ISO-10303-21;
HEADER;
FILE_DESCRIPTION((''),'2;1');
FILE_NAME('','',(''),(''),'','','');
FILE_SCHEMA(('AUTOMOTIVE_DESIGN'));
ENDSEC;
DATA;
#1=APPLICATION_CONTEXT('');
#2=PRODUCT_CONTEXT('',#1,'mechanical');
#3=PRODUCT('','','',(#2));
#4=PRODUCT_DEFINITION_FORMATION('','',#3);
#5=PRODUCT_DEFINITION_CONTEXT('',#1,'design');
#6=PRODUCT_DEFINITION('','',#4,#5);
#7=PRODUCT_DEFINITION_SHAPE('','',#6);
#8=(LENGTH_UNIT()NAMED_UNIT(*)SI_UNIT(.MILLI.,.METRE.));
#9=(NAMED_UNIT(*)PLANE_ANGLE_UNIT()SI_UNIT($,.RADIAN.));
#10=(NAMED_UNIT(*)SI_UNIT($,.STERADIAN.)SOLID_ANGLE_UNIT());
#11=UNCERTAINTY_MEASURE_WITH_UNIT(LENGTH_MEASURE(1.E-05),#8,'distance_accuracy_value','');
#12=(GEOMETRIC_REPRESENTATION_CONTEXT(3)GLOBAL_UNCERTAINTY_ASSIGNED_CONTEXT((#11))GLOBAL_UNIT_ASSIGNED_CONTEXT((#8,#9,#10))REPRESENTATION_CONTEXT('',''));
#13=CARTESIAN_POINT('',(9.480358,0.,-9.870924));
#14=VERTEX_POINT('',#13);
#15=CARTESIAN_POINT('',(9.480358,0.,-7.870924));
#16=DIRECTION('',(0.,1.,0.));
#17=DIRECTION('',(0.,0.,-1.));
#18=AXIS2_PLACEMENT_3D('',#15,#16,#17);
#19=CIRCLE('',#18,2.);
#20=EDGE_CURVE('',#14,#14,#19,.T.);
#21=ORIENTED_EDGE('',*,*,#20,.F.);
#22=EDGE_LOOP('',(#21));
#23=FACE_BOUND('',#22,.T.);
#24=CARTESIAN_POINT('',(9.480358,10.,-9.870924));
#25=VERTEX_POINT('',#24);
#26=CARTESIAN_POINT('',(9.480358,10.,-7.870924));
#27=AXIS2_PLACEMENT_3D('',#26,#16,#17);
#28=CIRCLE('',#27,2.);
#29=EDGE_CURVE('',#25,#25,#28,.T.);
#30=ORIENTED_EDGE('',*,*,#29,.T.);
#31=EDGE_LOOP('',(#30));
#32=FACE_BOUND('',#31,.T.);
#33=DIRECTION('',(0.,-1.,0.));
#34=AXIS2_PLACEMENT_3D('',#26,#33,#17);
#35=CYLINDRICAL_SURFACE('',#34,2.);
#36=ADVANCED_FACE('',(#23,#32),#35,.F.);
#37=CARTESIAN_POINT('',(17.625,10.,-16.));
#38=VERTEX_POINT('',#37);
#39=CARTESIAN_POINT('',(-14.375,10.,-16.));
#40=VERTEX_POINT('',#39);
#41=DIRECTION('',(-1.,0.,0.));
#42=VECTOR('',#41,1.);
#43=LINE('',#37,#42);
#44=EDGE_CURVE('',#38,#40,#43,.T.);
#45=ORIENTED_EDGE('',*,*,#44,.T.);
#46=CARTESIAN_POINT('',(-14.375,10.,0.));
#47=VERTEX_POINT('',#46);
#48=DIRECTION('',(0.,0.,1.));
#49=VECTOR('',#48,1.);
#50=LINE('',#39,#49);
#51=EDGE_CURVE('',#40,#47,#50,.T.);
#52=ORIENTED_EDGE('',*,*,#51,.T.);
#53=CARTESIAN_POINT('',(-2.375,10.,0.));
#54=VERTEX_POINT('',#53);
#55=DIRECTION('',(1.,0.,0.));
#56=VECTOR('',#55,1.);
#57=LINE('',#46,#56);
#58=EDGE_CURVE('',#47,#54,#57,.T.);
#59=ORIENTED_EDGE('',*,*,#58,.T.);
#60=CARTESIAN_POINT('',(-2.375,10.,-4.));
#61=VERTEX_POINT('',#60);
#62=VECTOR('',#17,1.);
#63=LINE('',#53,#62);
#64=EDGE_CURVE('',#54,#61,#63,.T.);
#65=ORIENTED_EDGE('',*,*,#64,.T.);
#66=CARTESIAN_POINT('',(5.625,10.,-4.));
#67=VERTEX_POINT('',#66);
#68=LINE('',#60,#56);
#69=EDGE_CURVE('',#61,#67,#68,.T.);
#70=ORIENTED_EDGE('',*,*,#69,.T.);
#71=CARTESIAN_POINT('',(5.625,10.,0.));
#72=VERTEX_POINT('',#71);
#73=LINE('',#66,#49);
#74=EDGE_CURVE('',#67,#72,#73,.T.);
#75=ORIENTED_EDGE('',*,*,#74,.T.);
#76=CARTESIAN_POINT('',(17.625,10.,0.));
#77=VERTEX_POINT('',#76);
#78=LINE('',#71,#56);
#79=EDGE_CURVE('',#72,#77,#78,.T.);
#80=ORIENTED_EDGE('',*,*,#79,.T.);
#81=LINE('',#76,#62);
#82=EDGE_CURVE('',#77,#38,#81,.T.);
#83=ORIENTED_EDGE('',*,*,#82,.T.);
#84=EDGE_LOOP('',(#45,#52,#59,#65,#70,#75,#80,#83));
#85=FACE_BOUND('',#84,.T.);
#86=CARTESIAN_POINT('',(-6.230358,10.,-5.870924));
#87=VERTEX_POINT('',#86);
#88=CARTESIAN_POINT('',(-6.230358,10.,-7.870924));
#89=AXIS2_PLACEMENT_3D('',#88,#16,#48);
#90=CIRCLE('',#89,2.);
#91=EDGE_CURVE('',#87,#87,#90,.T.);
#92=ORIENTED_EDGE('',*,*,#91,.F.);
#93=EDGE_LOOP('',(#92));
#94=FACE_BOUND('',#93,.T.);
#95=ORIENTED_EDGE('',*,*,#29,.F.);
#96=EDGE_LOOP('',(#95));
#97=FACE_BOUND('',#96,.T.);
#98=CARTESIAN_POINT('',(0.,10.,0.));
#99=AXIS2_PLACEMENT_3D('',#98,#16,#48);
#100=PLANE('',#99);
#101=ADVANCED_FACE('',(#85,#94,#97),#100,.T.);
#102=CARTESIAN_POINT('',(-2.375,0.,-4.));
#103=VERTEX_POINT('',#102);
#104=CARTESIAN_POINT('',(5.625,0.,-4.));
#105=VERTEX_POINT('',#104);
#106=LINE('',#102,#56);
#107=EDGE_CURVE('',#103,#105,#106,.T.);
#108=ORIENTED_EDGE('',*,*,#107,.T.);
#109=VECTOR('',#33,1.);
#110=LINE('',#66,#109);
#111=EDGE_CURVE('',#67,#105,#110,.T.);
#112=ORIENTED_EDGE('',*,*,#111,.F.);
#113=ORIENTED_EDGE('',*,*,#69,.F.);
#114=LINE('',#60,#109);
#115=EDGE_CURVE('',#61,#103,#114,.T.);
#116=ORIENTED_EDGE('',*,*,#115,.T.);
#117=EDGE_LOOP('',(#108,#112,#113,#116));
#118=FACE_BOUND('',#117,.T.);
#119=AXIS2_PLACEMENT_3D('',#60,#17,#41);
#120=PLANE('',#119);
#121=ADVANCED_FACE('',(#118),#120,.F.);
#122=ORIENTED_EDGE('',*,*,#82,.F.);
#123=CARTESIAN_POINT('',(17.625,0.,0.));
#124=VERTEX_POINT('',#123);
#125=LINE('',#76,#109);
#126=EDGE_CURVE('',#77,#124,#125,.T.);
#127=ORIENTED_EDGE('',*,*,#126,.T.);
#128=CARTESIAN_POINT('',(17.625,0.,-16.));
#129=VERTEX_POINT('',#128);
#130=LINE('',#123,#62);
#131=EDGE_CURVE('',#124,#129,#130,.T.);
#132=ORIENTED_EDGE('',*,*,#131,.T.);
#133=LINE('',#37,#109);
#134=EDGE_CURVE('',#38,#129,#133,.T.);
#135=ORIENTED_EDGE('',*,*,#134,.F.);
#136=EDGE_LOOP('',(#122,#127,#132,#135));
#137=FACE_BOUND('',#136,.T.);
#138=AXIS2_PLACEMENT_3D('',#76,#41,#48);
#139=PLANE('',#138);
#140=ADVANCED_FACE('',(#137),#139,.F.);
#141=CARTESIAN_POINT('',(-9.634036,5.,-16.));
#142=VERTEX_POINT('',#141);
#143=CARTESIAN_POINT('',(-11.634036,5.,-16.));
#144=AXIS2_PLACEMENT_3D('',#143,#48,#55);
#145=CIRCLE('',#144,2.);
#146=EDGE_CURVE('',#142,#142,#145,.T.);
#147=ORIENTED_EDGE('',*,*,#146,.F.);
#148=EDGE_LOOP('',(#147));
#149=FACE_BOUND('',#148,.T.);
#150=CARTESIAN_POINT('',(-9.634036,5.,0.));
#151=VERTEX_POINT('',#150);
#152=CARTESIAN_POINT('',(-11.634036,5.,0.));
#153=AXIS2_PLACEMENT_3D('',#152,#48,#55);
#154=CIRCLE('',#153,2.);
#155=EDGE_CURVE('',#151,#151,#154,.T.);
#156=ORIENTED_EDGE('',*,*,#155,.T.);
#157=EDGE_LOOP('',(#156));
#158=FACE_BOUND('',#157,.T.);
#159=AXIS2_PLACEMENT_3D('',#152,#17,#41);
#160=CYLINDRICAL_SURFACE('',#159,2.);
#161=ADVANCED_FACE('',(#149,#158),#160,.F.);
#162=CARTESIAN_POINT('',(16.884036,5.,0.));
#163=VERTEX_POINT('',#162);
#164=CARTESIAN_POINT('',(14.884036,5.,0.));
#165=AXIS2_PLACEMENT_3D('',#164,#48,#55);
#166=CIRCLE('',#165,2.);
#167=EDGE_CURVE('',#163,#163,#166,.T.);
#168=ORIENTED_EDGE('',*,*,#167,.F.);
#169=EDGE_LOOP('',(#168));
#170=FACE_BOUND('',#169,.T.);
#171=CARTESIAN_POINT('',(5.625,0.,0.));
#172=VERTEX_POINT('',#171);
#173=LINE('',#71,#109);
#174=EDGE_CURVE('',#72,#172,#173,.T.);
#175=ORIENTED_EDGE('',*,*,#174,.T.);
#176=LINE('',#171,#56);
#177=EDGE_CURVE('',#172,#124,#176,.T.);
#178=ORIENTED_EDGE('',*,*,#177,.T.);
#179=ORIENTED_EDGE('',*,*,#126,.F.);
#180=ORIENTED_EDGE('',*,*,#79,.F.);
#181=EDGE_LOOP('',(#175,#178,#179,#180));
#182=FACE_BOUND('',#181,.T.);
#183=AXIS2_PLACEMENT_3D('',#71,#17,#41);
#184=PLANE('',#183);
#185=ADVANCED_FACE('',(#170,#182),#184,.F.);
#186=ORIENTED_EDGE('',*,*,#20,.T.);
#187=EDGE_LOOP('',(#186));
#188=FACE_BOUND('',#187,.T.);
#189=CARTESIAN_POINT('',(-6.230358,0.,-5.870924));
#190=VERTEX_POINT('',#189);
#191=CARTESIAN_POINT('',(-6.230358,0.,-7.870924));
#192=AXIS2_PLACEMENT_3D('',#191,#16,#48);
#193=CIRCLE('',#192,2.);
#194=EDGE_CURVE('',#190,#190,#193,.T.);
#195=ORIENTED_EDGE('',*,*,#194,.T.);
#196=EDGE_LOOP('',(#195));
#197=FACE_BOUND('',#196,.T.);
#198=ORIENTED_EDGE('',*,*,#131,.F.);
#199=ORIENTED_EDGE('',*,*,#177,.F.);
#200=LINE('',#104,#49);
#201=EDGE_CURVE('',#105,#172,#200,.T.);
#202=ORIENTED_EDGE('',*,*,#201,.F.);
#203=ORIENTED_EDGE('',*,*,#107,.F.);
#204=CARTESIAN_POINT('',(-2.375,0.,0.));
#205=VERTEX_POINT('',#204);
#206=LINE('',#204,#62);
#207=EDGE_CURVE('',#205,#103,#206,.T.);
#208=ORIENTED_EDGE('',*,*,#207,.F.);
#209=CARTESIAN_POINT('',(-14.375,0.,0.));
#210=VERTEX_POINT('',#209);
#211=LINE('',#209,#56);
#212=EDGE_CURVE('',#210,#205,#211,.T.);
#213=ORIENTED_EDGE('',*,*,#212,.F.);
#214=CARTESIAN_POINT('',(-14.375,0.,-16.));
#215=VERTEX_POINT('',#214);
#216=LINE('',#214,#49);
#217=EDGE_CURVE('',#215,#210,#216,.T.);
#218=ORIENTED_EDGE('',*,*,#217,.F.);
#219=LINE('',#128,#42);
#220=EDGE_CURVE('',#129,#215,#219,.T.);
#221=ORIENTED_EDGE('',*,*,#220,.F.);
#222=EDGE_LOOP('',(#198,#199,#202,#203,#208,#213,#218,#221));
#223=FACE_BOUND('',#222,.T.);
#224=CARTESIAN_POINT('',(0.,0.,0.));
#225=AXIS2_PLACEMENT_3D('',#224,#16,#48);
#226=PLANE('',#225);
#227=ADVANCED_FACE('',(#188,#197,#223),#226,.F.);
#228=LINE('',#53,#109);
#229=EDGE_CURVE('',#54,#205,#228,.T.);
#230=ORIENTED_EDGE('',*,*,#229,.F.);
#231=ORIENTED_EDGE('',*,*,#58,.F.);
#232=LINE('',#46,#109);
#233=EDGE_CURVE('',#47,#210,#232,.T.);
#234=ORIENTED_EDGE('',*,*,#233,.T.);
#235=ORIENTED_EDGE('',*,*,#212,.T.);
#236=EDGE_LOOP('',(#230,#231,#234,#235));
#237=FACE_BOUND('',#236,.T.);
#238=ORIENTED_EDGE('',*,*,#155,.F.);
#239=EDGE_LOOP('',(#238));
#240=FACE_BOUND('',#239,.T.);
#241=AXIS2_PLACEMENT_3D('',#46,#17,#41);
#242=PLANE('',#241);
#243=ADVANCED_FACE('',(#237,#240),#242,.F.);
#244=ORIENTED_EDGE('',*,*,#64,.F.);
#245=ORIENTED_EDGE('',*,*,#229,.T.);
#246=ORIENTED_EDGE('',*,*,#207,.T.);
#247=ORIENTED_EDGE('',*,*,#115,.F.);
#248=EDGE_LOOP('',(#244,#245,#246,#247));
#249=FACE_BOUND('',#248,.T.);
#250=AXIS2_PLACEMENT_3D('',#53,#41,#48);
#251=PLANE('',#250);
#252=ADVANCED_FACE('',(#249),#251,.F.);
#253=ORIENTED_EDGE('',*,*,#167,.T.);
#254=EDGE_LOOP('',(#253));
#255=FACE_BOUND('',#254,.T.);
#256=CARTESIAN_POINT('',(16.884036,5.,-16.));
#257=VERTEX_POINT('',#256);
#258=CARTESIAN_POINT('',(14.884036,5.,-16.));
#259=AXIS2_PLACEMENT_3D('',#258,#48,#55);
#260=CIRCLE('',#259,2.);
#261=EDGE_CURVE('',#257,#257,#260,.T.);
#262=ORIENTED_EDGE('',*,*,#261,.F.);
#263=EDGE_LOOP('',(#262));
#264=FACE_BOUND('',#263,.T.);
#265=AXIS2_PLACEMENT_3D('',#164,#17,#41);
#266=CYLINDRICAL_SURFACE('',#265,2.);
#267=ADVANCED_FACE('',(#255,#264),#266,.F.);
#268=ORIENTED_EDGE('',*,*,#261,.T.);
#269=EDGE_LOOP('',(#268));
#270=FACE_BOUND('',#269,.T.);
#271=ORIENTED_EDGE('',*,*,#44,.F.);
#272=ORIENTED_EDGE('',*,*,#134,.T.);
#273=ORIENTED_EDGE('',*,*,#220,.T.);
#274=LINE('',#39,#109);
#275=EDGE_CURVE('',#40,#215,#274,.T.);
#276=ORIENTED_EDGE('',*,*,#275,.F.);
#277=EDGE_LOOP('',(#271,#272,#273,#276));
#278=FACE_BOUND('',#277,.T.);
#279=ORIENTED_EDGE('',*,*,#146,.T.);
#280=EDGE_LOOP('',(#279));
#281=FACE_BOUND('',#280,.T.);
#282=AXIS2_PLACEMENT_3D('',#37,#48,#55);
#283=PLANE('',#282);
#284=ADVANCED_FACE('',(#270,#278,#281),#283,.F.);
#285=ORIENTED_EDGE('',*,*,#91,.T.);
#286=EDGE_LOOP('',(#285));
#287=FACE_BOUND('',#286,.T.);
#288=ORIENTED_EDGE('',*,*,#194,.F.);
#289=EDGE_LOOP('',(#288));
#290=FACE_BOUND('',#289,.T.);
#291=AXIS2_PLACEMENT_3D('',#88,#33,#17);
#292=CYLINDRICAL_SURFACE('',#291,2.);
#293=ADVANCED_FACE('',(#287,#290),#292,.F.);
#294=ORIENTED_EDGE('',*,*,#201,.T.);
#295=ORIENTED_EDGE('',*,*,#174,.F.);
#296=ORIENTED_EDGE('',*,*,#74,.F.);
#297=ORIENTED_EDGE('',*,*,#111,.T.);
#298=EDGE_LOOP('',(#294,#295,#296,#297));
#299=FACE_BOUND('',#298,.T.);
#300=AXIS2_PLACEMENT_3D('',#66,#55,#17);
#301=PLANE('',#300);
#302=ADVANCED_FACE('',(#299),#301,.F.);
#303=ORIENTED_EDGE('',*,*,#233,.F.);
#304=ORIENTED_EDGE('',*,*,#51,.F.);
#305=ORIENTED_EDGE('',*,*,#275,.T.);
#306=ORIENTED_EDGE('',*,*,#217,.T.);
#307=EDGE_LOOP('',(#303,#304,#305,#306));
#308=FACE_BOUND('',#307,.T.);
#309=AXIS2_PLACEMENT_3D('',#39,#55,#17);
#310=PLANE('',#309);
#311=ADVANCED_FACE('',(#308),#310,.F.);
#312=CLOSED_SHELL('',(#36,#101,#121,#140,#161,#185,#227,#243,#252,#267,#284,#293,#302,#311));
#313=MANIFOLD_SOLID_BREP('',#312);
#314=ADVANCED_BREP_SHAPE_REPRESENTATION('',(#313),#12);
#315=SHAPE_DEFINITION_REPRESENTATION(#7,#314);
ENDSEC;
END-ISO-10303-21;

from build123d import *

# Parameters (mm, degrees)
SKETCH_1_R              = 2
EXTRUDE_1_DEPTH         = 10
CUT_EXTRUDE_START       = -16
CUT_EXTRUDE_1_OUTLINE_R = 2
CUT_EXTRUDE_1_DEPTH     = 16


# Read off the part's stored shape, not the designer's step: 切除-拉伸1
with BuildPart() as part:
    # 草图1 → 凸台-拉伸1 (new body)
    with BuildSketch(Plane(origin=(0, 0, 0), x_dir=(1, 0, 0), z_dir=(0, 1, 0))):
        Polygon((-14.375, 0), (-2.375, 0), (-2.375, 4), (5.625, 4), (5.625, 0), (17.625, 0), (17.625, 16), (-14.375, 16), align=None)
        with Locations(Location((-6.230357992, 7.870924175, 0), (0, 0, 270))):
            Circle(SKETCH_1_R, mode=Mode.SUBTRACT)
        with Locations(Location((9.480357992, 7.870924175, 0), (0, 0, 90))):
            Circle(SKETCH_1_R, mode=Mode.SUBTRACT)
    extrude(amount=EXTRUDE_1_DEPTH)

    # 切除-拉伸1 outline → 切除-拉伸1 (cut)
    with BuildSketch(Plane.XY.offset(CUT_EXTRUDE_START)):
        with Locations((14.884036252, 5)):
            Circle(CUT_EXTRUDE_1_OUTLINE_R)
        with Locations((-11.634036252, 5)):
            Circle(CUT_EXTRUDE_1_OUTLINE_R)
    extrude(amount=CUT_EXTRUDE_1_DEPTH, mode=Mode.SUBTRACT)


solid = part.part
